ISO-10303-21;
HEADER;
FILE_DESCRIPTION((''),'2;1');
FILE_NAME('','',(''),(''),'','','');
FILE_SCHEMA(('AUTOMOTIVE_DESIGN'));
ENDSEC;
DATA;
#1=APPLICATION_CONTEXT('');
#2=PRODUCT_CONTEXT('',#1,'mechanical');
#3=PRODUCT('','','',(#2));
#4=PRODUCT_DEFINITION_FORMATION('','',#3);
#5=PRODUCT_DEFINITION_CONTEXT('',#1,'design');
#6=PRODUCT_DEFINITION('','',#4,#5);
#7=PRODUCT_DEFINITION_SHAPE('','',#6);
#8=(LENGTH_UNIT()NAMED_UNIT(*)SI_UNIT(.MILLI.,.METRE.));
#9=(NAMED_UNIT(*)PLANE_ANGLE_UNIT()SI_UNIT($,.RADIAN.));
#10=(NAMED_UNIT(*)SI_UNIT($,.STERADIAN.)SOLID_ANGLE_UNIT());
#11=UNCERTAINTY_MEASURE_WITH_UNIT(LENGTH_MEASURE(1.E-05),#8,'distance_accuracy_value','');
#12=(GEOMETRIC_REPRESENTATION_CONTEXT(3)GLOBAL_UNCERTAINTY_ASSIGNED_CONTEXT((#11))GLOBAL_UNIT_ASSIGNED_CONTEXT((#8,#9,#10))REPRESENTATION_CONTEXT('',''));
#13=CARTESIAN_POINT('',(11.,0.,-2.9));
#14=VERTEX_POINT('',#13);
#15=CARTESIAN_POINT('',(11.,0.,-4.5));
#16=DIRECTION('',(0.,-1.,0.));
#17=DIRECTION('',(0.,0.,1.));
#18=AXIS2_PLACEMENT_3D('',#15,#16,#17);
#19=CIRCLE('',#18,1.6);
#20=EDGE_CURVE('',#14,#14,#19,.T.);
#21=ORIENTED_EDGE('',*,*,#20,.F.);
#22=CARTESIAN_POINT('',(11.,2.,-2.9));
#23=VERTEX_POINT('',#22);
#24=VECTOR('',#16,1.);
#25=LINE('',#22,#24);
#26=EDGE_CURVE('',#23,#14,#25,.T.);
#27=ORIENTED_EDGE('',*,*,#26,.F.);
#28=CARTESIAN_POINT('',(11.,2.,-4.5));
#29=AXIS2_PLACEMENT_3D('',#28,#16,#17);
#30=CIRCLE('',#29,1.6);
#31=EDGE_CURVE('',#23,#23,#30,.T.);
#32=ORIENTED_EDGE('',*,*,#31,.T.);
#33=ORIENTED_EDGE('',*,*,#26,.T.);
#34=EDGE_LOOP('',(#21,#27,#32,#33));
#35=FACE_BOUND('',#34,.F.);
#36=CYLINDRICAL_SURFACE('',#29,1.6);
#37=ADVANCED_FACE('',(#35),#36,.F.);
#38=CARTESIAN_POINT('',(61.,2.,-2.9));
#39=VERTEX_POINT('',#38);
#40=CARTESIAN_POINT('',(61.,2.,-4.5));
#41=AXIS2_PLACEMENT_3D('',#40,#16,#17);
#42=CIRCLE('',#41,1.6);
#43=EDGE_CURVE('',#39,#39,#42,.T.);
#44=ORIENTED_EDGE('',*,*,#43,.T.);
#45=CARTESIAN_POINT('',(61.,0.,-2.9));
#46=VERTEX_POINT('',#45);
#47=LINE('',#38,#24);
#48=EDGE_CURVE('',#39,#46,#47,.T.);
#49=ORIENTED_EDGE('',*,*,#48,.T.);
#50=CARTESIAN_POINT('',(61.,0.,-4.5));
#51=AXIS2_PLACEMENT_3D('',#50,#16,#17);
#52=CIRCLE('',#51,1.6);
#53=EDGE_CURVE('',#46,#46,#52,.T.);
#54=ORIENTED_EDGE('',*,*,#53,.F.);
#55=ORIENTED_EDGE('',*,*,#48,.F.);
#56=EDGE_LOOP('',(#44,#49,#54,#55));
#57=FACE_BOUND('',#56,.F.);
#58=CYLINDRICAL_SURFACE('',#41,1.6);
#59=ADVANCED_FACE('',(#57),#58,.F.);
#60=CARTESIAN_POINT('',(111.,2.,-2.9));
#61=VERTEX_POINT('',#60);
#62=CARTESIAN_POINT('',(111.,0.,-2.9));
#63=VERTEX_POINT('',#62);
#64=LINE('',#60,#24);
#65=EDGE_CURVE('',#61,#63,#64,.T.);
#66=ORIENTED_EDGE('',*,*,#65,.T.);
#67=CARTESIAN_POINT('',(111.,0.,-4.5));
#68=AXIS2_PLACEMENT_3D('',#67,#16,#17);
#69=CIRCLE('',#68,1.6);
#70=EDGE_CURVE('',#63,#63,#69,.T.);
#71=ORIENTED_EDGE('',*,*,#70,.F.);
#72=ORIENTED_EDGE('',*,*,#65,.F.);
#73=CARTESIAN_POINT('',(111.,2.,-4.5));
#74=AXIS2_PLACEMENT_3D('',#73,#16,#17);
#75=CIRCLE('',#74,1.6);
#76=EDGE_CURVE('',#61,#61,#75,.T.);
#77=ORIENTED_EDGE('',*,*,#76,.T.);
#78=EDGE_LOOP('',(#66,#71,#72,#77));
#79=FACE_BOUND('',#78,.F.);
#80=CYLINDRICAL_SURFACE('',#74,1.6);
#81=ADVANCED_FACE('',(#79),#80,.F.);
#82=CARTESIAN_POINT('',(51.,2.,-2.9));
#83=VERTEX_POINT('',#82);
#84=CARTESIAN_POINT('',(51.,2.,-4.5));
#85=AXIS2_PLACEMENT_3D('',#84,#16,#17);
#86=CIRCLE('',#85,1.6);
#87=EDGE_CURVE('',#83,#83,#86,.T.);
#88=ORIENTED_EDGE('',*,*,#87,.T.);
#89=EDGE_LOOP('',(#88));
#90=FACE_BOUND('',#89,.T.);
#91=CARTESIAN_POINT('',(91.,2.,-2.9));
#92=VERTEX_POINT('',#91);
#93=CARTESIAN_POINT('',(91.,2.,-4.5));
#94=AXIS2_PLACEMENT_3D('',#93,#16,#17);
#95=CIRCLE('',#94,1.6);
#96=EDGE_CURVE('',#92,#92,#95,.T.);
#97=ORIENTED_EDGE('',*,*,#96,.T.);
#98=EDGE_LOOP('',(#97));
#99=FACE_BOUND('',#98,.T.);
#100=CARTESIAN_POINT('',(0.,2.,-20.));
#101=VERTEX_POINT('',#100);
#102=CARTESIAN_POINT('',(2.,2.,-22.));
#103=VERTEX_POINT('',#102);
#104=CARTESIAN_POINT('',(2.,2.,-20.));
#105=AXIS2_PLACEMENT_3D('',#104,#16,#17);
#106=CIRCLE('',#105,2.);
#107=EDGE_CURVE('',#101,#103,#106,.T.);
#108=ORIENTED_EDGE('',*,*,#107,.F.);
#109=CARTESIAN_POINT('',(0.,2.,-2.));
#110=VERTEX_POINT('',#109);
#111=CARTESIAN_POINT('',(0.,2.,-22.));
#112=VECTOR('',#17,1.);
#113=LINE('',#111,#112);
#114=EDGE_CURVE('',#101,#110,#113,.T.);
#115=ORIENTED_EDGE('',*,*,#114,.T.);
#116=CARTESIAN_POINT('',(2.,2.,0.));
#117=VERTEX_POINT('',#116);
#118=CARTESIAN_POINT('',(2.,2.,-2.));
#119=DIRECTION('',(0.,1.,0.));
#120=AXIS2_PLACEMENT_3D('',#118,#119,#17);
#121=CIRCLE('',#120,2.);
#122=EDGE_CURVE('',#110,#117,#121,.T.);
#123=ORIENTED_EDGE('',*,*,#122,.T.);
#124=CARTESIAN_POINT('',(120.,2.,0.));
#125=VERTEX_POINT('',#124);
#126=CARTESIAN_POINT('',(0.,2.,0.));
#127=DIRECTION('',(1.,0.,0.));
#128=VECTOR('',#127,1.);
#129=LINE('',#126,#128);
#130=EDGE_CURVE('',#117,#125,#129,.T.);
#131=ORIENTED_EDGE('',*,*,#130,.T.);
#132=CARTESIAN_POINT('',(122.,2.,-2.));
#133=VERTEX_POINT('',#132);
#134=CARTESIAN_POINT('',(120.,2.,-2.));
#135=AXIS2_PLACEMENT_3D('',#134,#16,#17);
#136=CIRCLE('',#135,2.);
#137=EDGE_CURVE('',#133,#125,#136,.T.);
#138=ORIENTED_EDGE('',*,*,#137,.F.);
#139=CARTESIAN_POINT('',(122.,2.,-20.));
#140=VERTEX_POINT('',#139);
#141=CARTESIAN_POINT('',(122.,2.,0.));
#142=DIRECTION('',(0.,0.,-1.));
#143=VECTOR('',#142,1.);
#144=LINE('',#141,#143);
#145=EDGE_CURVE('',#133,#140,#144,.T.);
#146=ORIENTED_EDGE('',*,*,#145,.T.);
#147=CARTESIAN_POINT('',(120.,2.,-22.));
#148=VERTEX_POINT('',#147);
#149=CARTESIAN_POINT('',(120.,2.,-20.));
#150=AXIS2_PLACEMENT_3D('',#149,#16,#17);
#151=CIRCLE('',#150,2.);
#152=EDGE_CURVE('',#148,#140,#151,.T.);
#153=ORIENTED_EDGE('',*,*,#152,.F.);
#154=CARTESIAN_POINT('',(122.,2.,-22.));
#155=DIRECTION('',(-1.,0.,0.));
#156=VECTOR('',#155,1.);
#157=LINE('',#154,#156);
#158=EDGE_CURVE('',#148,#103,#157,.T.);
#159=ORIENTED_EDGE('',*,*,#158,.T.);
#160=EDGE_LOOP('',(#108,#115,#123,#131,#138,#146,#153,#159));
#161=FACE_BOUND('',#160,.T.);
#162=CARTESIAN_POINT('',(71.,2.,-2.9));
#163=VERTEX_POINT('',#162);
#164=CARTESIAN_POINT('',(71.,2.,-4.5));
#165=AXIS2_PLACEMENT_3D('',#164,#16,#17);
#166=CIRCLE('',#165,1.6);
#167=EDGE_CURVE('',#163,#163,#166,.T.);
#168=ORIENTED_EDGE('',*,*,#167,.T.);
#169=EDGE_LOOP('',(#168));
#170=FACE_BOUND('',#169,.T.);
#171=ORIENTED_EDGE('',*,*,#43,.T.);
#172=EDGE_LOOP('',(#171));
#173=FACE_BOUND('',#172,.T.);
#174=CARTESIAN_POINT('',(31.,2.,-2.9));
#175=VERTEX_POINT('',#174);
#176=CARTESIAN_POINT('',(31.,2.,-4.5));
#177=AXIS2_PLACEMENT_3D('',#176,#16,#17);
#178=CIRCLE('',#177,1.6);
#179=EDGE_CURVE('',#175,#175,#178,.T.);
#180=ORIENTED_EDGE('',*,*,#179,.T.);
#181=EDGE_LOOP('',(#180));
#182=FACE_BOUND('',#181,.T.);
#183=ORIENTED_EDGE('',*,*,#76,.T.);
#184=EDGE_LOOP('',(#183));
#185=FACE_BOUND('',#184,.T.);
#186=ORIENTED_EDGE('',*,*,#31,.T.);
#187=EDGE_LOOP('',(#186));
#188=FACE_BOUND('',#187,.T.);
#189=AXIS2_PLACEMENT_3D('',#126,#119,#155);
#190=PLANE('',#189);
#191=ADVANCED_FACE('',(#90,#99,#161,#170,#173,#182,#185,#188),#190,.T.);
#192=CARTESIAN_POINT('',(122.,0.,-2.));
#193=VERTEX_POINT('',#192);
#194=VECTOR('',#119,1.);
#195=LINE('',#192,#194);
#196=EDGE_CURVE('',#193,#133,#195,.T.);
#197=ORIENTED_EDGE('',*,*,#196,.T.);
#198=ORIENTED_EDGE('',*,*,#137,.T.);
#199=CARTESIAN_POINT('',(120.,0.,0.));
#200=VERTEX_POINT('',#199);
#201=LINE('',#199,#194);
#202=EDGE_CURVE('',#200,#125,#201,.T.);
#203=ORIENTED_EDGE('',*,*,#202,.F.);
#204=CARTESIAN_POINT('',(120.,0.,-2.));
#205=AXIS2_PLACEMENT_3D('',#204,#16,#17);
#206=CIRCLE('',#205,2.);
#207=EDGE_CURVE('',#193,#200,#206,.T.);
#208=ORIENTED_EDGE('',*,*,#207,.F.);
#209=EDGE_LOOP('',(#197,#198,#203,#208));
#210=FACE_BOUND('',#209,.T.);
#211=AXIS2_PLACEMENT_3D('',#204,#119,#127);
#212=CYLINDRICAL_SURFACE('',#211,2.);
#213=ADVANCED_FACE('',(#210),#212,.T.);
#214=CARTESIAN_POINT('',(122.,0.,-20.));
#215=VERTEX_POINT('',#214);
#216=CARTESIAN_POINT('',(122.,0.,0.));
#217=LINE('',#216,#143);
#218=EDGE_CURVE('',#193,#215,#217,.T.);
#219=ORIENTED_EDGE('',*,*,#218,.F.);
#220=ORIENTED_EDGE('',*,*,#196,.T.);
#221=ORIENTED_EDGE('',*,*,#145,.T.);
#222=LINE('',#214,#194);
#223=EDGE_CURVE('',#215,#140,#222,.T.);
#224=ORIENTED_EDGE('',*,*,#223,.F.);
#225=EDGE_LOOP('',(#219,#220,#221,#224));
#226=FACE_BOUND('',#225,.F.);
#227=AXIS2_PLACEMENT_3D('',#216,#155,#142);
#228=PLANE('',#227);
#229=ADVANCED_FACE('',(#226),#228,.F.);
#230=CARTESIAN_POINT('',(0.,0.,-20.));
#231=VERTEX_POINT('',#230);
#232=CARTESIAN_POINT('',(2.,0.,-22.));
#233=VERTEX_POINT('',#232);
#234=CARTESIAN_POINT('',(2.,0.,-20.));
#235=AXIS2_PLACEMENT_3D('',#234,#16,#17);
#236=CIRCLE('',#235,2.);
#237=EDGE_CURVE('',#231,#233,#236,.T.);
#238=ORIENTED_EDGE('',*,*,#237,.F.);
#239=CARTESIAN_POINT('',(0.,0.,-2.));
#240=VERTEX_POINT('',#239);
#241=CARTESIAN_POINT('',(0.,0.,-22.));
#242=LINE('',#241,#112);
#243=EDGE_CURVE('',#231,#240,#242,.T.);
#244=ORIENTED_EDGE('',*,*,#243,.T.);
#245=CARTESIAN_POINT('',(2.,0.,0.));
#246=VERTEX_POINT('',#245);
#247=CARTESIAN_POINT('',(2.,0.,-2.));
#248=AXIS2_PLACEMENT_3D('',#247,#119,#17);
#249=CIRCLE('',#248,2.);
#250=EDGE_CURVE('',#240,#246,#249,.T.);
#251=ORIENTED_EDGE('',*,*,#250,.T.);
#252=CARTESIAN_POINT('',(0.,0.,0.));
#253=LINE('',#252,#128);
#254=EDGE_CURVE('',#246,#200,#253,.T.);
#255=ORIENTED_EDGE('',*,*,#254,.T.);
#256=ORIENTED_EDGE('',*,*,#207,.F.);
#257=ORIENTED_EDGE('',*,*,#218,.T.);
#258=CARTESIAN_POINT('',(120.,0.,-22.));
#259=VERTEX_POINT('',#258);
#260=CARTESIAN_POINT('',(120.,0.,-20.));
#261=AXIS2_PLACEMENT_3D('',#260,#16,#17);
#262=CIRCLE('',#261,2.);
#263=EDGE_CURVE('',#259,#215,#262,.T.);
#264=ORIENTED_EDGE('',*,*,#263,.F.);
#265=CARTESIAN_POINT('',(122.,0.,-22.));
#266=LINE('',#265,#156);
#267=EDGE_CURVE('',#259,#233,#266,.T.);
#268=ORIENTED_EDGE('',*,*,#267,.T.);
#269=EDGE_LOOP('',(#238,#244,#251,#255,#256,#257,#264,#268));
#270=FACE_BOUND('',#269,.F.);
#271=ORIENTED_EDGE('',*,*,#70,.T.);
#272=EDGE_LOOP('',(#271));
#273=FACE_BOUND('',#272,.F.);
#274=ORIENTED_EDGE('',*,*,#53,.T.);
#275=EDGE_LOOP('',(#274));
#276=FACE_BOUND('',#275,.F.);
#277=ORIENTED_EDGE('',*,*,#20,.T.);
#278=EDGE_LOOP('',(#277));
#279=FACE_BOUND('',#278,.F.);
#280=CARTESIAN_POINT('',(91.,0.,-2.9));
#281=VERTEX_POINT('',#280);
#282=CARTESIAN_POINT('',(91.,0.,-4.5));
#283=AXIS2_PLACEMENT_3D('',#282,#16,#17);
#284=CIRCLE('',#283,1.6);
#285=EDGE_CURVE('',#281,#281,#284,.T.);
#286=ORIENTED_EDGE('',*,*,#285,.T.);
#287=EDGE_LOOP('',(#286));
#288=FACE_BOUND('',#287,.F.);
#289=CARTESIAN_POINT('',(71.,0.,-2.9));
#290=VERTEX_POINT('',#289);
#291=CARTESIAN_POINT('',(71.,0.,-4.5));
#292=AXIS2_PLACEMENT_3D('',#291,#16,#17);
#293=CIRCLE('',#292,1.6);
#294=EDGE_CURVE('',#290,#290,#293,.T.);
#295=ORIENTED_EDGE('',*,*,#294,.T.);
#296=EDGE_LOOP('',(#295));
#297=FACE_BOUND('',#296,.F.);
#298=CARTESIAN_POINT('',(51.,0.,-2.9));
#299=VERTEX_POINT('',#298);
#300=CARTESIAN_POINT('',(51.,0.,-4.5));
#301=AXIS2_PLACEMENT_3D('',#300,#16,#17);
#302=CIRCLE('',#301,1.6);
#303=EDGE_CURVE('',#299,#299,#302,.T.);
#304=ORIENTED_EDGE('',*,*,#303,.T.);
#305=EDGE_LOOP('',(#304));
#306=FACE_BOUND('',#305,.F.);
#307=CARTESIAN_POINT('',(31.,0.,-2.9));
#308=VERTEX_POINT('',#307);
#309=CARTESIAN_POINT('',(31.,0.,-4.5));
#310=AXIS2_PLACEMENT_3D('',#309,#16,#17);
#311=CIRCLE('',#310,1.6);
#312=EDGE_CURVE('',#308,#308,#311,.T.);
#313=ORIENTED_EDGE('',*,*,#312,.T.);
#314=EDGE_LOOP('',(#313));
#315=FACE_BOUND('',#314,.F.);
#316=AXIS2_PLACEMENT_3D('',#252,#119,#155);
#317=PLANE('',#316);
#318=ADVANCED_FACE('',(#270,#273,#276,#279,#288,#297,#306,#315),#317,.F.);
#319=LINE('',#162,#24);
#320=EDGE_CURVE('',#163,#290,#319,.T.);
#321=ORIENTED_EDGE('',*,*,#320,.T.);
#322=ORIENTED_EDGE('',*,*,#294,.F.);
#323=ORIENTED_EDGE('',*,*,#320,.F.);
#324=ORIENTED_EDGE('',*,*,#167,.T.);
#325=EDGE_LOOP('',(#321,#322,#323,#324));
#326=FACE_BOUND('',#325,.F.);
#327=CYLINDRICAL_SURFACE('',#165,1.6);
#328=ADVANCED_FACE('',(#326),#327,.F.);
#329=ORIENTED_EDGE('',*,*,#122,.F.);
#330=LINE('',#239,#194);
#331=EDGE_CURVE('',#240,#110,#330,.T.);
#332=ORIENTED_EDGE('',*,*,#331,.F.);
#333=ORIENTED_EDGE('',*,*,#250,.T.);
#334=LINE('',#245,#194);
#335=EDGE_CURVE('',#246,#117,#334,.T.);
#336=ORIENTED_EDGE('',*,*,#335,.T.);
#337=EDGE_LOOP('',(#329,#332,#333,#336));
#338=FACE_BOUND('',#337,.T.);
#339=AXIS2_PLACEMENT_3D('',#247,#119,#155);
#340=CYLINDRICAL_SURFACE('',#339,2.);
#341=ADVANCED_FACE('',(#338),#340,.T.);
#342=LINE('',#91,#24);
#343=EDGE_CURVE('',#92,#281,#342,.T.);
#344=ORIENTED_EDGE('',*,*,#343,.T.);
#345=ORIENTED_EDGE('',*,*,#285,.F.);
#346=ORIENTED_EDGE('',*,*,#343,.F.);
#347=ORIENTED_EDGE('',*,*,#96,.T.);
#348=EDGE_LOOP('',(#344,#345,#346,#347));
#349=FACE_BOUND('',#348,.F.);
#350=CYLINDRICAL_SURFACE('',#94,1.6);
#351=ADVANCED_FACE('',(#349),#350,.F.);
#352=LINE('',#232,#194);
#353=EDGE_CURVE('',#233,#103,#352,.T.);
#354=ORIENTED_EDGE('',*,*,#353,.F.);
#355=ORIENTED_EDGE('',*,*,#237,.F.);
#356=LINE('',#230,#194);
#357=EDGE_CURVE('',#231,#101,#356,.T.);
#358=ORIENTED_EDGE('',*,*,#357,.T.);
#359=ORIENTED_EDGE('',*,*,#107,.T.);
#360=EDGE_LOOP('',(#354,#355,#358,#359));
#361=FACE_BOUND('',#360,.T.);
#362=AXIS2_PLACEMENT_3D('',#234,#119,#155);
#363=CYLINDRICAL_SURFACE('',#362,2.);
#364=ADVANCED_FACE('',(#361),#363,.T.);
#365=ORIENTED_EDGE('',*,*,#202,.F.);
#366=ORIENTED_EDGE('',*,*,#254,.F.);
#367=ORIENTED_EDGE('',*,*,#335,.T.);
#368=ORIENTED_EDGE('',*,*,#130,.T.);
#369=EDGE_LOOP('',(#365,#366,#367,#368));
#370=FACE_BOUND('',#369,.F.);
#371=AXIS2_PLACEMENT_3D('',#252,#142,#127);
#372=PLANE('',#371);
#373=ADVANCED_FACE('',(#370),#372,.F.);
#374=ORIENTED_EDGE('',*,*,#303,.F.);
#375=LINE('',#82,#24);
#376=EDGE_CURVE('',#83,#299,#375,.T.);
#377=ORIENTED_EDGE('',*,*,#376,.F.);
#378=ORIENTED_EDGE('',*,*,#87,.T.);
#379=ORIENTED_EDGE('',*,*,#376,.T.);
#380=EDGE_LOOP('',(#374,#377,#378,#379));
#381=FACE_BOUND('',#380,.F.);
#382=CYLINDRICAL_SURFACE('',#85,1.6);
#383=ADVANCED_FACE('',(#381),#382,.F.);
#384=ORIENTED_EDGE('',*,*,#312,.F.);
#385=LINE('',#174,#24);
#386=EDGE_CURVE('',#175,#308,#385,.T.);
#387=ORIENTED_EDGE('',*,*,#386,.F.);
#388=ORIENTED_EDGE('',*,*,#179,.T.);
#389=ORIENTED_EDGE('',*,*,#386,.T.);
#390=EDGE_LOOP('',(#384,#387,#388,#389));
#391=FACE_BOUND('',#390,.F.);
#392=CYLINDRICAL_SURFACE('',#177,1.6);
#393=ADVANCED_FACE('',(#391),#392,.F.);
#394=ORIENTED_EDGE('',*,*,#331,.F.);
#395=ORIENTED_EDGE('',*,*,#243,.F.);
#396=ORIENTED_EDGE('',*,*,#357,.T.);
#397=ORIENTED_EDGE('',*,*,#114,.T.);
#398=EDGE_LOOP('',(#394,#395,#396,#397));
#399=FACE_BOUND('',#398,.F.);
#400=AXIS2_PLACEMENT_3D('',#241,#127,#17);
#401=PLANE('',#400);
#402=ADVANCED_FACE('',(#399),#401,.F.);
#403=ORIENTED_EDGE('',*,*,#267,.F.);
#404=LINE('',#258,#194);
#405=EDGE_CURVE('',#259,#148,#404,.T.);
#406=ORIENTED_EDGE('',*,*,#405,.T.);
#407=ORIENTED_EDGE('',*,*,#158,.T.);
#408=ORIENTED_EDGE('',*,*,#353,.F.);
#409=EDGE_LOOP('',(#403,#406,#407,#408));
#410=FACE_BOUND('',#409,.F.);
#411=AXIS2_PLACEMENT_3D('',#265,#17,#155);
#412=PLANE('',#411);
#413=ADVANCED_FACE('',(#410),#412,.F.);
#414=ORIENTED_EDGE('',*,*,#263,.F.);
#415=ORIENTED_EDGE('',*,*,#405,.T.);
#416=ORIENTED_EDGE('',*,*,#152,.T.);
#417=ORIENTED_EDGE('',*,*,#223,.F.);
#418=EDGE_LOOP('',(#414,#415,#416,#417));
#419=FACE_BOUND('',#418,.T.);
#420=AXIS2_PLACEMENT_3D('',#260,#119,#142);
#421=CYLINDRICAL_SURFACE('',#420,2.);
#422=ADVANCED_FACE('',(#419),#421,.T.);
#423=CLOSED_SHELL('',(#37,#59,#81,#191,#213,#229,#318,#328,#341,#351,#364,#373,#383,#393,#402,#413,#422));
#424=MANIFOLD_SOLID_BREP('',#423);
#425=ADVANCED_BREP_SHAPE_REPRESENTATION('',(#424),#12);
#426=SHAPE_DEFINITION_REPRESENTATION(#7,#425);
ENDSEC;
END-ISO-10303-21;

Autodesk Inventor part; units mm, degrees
ref_plane "YZ Plane" through (0, 0, 0) normal (1, 0, 0) x (0, 1, 0)
ref_plane "XZ Plane" through (0, 0, 0) normal (0, 1, 0) x (-1, 0, 0)
ref_plane "XY Plane" through (0, 0, 0) normal (0, 0, 1) x (1, 0, 0)
sketch "スケッチ1" plane through (0, 0, 0) normal (0, 1, 0) x (-1, 0, 0)
  line L0 (0, 0) -> (-122, 0)
  line L1 (-122, 0) -> (-122, -22)
  line L2 (-122, -22) -> (0, -22)
  line L3 (0, -22) -> (0, 0)
  dimension "d0" = 122
  dimension "d1" = 22
extrude "押し出し1" add sketch "スケッチ1" along normal blind 2
fillet "面フィレット1" radius 2 1 edges at (0, 1, 0)
fillet "面フィレット2" radius 2 1 edges at (0, 1, -22)
fillet "面フィレット3" radius 2 1 edges at (122, 1, -22)
fillet "面フィレット4" radius 2 1 edges at (122, 1, 0)
sketch "スケッチ2" plane through (0, 2, 0) normal (0, 1, 0) x (1, 0, 0)
  line L0 (2, 0) -> (120, 0) projected
  line L1 (0, 20) -> (0, 2) projected
  point P0 (0, 0)
  point P1 (11, 4.5)
  point P2 (31, 4.5)
  point P3 (51, 4.5)
  point P4 (61, 4.5)
  point P5 (71, 4.5)
  point P6 (91, 4.5)
  point P7 (111, 4.5)
  dimension "d8" = 4.5
  dimension "d9" = 11
  dimension "d10" = 20
  dimension "d11" = 20
  dimension "d12" = 10
  dimension "d13" = 10
  dimension "d14" = 20
  dimension "d15" = 20
hole "穴1" at (11, 2, -4.5) at (31, 2, -4.5) at (51, 2, -4.5) at (61, 2, -4.5) at (71, 2, -4.5) at (91, 2, -4.5) at (111, 2, -4.5) direction (0, -1, 0) diameter 3.2 depth 8.8 tip angle 118
properties part number "ラインセンサ"
